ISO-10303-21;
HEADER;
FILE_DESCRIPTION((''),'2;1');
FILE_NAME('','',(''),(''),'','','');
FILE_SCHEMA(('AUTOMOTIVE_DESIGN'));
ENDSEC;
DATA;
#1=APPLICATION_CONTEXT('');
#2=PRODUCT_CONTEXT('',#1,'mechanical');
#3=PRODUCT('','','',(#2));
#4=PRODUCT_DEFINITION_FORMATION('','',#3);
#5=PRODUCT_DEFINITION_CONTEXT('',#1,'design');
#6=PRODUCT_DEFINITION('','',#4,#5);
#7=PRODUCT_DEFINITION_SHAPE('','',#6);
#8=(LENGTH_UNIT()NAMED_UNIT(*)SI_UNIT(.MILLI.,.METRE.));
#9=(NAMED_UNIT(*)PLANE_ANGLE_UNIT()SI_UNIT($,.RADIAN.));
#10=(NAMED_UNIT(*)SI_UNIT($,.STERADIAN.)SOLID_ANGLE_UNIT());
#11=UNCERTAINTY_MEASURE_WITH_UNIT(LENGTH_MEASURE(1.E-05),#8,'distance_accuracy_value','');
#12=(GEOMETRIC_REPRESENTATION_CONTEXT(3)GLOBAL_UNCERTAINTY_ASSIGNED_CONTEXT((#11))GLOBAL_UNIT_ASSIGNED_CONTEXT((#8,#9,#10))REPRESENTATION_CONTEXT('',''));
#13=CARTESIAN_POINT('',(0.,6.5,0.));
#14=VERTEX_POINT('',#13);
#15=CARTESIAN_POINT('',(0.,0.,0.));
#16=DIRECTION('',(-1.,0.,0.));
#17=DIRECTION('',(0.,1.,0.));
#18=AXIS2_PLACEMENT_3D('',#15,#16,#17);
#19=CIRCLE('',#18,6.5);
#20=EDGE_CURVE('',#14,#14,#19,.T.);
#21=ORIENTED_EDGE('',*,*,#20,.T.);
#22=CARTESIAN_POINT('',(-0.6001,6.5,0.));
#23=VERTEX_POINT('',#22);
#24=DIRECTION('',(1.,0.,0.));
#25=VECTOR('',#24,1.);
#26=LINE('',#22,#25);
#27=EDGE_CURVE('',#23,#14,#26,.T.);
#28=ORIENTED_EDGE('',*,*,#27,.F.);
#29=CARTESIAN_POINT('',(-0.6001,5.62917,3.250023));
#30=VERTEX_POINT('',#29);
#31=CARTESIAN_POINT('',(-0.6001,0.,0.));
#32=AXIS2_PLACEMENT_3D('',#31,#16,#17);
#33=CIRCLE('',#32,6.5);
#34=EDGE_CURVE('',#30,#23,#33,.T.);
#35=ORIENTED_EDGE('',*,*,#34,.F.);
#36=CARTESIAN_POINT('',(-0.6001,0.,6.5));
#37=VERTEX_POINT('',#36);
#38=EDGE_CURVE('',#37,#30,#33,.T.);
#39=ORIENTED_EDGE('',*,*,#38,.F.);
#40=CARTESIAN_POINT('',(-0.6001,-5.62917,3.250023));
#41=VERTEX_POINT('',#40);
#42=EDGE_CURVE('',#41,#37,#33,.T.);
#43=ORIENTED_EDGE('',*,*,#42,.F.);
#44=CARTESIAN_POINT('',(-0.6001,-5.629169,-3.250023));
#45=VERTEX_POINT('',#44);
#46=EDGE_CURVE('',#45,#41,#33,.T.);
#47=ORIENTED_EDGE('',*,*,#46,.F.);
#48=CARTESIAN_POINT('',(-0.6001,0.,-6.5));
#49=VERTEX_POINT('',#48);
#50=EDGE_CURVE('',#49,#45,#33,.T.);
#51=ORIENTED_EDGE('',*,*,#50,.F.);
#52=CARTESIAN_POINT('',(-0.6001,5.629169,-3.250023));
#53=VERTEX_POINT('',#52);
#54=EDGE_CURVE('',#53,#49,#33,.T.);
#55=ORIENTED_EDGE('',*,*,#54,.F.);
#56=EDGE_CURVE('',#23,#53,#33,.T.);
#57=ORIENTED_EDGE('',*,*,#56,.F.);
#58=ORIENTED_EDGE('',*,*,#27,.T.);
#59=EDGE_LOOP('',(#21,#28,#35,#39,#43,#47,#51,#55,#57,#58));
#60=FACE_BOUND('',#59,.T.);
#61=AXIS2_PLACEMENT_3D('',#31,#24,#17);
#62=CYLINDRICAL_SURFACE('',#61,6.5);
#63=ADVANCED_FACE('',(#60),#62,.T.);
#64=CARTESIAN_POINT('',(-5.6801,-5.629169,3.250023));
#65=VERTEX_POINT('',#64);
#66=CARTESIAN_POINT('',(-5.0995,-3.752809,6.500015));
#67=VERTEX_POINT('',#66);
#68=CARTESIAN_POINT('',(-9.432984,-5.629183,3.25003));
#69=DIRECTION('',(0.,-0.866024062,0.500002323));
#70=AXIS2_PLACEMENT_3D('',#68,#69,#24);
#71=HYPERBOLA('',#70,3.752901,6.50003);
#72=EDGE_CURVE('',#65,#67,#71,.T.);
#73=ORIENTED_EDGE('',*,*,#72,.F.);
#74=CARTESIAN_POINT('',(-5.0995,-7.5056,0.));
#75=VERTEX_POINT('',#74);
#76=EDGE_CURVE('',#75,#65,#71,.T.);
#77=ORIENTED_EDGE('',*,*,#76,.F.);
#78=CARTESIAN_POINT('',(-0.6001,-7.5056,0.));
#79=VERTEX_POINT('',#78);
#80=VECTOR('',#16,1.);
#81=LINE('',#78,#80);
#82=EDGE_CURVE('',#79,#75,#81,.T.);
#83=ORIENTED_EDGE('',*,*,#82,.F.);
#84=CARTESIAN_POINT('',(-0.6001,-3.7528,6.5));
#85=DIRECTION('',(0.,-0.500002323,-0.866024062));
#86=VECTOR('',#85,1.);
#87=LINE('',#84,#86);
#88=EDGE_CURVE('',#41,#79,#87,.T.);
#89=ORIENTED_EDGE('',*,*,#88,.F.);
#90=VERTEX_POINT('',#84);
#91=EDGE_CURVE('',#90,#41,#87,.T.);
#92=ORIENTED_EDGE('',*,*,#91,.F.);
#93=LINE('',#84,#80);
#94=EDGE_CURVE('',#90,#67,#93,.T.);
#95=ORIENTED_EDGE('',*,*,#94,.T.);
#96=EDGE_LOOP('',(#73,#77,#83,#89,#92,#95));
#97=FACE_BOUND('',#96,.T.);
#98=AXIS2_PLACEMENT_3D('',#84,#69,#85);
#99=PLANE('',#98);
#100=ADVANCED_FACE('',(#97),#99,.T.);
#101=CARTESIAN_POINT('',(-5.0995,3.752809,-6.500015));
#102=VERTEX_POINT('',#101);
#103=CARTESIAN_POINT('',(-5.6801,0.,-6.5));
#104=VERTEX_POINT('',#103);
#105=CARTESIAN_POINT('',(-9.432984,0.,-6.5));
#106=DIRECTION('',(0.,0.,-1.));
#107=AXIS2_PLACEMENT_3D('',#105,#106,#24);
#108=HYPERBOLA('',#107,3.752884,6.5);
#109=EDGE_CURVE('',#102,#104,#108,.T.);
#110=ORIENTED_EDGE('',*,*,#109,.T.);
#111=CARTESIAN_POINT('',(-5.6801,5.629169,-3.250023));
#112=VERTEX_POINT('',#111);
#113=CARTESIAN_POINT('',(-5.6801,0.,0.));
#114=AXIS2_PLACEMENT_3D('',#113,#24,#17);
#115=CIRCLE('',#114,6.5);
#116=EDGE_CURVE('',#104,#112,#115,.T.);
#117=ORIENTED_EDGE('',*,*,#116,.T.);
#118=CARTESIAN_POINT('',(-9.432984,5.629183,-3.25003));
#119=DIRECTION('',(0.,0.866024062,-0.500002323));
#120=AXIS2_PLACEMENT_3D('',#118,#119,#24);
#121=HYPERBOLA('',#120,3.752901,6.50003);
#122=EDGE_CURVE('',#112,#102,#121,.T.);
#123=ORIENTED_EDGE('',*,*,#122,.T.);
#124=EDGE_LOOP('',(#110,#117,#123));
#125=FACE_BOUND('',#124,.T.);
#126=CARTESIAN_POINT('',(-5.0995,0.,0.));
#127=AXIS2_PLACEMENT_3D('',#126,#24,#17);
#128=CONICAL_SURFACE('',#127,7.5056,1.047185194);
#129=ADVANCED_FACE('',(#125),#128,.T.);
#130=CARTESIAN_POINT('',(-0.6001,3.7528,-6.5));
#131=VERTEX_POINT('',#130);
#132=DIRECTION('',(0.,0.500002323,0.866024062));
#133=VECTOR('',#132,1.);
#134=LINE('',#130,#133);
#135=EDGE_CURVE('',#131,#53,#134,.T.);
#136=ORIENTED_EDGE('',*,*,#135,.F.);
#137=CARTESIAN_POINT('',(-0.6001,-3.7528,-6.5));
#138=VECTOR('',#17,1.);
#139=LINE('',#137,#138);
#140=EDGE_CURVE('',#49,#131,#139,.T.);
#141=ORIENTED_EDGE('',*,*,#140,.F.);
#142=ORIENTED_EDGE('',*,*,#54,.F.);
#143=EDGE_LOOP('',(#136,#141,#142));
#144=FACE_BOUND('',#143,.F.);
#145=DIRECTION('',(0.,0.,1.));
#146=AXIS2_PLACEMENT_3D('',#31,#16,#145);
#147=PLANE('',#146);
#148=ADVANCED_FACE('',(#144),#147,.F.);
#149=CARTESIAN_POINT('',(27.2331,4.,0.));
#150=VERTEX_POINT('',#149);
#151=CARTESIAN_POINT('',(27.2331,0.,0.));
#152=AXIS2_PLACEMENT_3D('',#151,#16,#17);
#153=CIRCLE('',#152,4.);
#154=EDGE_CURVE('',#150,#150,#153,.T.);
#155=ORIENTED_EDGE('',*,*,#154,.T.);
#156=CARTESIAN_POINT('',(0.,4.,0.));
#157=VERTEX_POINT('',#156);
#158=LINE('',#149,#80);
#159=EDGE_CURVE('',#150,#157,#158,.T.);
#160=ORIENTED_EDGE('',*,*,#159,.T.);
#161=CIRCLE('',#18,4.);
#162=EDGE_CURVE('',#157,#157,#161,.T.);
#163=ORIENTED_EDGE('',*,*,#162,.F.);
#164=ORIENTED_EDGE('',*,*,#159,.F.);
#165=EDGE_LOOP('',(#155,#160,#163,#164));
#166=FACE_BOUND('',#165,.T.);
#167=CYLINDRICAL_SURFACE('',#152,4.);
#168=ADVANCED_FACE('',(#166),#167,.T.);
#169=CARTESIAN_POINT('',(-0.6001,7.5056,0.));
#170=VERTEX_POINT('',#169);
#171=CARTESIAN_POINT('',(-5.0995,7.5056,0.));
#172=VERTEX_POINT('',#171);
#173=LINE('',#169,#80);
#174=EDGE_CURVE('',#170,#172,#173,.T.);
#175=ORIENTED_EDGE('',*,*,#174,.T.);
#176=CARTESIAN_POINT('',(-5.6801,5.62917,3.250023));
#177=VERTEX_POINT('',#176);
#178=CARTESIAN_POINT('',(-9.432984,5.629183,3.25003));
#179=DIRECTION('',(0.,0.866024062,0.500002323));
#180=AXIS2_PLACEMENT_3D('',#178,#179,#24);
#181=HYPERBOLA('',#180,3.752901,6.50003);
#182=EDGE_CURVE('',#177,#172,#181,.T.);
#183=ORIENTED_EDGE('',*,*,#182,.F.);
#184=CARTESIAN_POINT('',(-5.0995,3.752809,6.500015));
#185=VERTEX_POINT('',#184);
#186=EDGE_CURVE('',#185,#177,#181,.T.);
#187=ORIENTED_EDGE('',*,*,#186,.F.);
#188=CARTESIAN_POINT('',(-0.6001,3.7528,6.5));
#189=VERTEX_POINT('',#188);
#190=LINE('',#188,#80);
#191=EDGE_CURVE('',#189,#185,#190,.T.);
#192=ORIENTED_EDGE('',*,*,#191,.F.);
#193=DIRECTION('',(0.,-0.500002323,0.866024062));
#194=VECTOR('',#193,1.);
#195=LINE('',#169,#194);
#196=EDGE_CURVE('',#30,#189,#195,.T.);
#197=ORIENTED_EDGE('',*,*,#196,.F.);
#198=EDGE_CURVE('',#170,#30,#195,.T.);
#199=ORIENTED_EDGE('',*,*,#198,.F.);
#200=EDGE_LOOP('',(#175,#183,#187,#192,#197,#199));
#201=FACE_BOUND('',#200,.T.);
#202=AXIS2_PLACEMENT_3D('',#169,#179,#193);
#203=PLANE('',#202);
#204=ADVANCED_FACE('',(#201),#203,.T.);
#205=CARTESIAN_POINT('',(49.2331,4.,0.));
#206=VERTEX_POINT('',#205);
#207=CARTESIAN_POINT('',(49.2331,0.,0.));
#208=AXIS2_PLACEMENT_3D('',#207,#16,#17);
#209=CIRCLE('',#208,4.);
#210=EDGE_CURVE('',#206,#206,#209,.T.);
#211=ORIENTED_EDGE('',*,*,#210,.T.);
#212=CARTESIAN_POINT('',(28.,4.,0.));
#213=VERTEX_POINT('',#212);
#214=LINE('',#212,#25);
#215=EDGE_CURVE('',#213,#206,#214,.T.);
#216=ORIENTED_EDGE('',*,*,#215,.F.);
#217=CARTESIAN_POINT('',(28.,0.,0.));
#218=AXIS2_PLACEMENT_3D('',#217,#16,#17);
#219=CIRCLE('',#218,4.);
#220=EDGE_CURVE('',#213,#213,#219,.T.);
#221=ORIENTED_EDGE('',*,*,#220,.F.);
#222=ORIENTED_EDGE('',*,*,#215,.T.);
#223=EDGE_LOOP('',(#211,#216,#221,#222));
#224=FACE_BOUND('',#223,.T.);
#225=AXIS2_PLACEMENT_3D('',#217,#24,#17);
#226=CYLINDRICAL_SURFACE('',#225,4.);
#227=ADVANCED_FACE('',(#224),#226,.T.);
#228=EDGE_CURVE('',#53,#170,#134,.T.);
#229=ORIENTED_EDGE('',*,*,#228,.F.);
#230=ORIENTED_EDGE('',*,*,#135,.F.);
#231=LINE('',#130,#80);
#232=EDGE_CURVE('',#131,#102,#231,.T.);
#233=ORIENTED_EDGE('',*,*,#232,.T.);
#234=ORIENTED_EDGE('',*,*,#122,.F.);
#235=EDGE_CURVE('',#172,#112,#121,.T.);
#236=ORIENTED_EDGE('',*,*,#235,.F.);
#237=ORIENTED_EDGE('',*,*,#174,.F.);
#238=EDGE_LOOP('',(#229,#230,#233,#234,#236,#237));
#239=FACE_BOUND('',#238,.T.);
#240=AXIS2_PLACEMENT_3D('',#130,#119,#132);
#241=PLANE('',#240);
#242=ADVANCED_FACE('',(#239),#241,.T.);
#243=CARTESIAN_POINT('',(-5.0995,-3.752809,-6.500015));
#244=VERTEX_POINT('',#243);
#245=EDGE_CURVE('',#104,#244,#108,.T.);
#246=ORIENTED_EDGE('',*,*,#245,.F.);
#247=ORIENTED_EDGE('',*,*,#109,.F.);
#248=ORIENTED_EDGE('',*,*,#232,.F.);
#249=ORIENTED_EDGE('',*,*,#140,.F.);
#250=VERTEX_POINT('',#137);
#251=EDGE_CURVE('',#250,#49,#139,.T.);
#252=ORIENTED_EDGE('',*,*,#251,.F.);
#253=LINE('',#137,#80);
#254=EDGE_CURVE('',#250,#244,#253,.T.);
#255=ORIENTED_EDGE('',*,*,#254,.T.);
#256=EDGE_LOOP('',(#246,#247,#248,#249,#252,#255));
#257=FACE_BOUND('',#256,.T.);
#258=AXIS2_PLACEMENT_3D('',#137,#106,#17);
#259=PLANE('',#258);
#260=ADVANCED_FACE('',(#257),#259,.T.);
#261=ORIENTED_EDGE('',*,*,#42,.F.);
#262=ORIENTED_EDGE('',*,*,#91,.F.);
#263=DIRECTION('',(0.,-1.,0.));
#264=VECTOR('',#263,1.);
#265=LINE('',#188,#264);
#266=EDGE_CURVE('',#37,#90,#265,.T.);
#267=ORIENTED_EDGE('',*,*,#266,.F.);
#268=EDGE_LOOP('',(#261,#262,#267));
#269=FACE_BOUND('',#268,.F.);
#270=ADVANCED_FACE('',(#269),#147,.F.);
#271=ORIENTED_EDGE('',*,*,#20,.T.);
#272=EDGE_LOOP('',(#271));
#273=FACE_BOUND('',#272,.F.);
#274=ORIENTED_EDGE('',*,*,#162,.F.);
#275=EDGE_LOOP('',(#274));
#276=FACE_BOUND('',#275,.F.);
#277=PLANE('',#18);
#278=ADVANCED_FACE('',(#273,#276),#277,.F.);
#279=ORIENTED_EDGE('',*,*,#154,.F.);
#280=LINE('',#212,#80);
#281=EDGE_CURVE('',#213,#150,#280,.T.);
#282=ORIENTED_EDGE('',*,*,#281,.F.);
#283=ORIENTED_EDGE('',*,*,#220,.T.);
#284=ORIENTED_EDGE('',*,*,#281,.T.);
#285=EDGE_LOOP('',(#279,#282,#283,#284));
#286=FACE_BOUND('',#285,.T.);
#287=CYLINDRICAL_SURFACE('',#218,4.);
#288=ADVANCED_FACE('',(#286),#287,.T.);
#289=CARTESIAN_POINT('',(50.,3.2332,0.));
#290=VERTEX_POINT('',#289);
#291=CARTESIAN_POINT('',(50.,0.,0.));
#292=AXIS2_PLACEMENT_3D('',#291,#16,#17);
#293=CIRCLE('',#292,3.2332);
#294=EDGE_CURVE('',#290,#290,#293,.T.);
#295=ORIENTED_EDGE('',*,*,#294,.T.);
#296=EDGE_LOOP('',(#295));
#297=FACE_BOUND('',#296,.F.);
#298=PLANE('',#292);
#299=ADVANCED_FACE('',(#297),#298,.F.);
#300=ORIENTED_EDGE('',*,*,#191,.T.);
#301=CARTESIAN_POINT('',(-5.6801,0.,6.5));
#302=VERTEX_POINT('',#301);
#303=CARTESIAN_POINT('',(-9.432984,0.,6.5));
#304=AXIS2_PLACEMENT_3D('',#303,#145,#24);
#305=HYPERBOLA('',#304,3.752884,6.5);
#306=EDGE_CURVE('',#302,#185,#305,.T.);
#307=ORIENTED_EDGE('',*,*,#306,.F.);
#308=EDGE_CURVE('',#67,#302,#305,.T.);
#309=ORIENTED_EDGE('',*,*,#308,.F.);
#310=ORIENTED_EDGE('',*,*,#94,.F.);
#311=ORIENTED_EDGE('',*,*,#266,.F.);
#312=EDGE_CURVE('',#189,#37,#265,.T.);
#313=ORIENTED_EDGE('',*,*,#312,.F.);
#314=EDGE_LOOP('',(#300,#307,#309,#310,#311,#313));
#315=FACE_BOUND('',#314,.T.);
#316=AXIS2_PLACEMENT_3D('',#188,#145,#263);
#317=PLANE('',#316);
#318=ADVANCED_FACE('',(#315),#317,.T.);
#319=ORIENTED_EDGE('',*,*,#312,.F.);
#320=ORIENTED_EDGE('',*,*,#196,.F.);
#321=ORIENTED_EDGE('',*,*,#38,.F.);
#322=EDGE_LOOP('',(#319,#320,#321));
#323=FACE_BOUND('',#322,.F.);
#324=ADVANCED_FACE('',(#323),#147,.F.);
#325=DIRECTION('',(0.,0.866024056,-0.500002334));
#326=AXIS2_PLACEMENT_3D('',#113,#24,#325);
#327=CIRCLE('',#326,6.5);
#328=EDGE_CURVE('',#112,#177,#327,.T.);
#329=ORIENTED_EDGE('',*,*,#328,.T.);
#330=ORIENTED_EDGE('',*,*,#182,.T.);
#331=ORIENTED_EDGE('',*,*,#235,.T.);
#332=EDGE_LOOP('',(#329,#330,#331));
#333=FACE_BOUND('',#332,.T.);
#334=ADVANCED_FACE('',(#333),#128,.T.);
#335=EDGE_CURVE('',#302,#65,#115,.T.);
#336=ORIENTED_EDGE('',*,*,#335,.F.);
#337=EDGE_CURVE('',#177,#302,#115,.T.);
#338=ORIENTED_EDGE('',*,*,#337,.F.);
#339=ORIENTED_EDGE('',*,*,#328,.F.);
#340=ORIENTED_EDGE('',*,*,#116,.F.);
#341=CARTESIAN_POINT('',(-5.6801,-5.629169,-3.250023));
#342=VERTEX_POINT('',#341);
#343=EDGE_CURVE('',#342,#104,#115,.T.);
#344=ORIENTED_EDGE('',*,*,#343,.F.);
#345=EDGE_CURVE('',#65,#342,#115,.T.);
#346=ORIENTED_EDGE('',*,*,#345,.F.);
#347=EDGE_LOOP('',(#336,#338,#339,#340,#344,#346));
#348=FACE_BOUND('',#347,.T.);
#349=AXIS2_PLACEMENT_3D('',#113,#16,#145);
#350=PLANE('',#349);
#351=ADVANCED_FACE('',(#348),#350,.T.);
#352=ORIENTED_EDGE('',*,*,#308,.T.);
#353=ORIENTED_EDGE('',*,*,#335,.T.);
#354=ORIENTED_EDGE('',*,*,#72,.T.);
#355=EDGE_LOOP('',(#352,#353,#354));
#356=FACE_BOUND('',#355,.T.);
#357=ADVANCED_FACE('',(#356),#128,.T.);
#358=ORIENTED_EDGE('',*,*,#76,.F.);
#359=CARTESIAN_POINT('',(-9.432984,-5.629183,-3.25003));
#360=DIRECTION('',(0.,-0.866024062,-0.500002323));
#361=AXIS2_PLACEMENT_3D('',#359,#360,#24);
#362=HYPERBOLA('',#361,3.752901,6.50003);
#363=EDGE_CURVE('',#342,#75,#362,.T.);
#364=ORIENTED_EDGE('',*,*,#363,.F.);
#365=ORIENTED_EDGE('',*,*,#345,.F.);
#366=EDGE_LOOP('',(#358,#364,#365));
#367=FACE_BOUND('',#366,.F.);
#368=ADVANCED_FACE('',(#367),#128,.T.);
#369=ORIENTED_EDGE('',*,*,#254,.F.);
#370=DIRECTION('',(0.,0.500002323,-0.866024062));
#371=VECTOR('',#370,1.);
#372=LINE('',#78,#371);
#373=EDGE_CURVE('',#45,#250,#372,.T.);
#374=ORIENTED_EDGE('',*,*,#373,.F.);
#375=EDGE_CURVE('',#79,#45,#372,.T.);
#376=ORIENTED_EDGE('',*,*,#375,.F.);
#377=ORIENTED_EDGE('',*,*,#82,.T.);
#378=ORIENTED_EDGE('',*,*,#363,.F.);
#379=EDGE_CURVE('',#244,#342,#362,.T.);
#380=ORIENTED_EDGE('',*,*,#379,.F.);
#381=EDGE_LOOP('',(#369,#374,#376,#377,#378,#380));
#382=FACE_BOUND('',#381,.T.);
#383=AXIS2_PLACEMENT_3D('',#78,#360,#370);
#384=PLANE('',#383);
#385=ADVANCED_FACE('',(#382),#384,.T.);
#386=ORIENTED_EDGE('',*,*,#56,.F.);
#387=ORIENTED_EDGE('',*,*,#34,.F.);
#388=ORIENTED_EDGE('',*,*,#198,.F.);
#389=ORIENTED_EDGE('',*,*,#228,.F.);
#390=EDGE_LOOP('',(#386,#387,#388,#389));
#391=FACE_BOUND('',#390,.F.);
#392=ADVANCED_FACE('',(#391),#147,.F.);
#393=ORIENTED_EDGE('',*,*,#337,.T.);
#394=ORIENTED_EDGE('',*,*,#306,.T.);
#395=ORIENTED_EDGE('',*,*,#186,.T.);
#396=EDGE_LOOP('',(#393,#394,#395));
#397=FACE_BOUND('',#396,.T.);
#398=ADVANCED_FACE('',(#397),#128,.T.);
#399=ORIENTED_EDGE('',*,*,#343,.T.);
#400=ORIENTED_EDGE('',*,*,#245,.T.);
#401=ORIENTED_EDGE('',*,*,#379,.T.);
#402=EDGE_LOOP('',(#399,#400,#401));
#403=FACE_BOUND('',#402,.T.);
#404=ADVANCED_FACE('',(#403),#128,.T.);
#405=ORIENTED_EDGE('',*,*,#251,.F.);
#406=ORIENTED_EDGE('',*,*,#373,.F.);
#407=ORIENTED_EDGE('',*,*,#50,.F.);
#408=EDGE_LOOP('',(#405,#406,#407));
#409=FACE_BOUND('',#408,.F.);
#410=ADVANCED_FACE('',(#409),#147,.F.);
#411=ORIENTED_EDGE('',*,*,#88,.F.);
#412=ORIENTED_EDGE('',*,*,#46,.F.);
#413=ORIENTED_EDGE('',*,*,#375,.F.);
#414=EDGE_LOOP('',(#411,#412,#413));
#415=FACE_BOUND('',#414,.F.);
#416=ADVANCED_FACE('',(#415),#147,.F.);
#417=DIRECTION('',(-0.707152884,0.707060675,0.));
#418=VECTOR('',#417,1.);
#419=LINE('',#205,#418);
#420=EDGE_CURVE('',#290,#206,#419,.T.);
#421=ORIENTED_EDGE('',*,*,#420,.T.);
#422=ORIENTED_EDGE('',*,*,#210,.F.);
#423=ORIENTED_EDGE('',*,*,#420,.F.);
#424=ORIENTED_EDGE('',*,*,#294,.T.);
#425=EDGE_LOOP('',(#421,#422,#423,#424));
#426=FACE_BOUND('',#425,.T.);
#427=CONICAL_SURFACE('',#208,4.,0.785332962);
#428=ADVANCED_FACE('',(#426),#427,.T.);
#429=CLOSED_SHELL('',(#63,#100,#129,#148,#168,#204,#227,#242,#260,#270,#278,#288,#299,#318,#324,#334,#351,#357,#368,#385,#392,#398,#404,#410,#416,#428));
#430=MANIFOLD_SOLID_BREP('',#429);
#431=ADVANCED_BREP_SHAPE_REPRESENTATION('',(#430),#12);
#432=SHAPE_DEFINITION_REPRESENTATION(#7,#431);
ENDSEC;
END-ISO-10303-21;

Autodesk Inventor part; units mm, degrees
ref_plane "YZ Plane" through (0, 0, 0) normal (1, 0, 0) x (0, 1, 0)
ref_plane "XZ Plane" through (0, 0, 0) normal (0, 1, 0) x (-1, 0, 0)
sketch "Sketch1" plane through (0, 0, 0) normal (0, 0, 1) x (1, 0, 0)
  line L0 (0, 6.5) -> (0, 4)
  line L1 (28, 4) -> (50, 4)
  line L2 (50, 4) -> (50, 0)
  line L3 (50, 0) -> (-0.6001, 0)
  line L4 (-10.7201, 0) -> (60.12, 0) projected
  line L5 (-0.6001, 0) -> (-0.6001, 6.5)
  line L6 (-0.6001, 6.5) -> (0, 6.5)
  line L7 (28, 4) -> (27.2331, 4)
  line L8 (27.2331, 4) -> (0, 4)
  line L9 (0, -1.3) -> (0, 7.8) projected
  dimension "d0" = 50
  dimension "d1" = 22
  dimension "d2" = 8
  dimension "d9" = 0.6001
  dimension "d10" = 13
  dimension "d13" = 0.7669
  dimension "d14" = 8
revolve "Body" add sketch "Sketch1" angle 360 about axis through (50, 0, 0) along (-1, 0, 0)
sketch "Sketch2" plane through (-0.6001, 0, 0) normal (-1, 0, 0) x (0, 0, 1)
  line L0 (0, 7.5056) -> (6.5, 3.7528)
  line L1 (6.5, 3.7528) -> (6.5, -3.7528)
  line L2 (6.5, -3.7528) -> (0, -7.5056)
  line L3 (0, -7.5056) -> (-6.5, -3.7528)
  line L4 (-6.5, -3.7528) -> (-6.5, 3.7528)
  line L5 (-6.5, 3.7528) -> (0, 7.5056)
  point P0 (0, 0)
  point P1 (0, 0)
  dimension "d11" = 13
extrude "Head" add sketch "Sketch2" along normal blind 5.08
sketch "Sketch4" plane through (0, 0, 0) normal (0, 0, 1) x (1, 0, 0)
  line L0 (-5.6801, 6.5) -> (-5.6801, 7.5056)
  line L1 (-5.6801, 7.5056) -> (-5.0995, 7.5056)
  line L2 (-5.0995, 7.5056) -> (-5.6801, 6.5)
  line L3 (-6.6961, 0) -> (0.4159, 0) projected
  line L4 (-0.6001, 7.5056) -> (-5.6801, 7.5056) projected
  line L5 (-5.6801, 3.7528) -> (-5.6801, 7.5056) projected
  dimension "d5" = 30
  dimension "d19" = 13
revolve "Chamfer1" cut sketch "Sketch4" angle 360 about axis through (-10, 0, 0) along (1, 0, 0)
thread "Thread" size "M8x1.25" class "6g" standard "ISO Metric profile" length 22
chamfer "Chamfer2" distance 0.7668 distance2 0.7669 1 edges at (50, -4, 0) measured on face at (50, 1.2946, -0.3191)
ref_plane "Work Plane1" through (1.525, 0, 0) normal (0, 0, 1) x (1, 0, 0)
equation "\"d11\" = SW"
equation "\"d3\" = KOH - SD"
equation "\"d15\" = GEL"
equation "\"d6\" = -0.5 * SPD + 0.5 * GD"
equation "\"d0\" = NLG"
equation "\"d1\" = GEL"
equation "\"d2\" = GD"
equation "\"d10\" = SD2"
equation "\"d14\" = BDM"
equation "\"d5\" = ANG1"
equation "\"d19\" = SW0"
equation "\"NLG\" = 50"
equation "\"GD\" = NND"
equation "\"BDM\" = NND"
equation "\"KOH\" = 5.68"
equation "\"GEL\" = 22"
equation "\"SW\" = 13"
equation "\"SW0\" = SW"
equation "\"SPD\" = NND - 1.2269 * PTC"
equation "\"SD2\" = SW"
equation "\"SD\" = 0.6"
equation "\"ANG1\" = 30deg"
equation "\"GAL\" = 0.61345 * PTC"
equation "\"GUL\" = 0.61345 * PTC"
equation "\"RR\" = 0.4"
equation "\"WFT\" = SD"
equation "\"GD1\" = THREADDIA - 1.2269 * PTC"
equation "\"THREADDIA\" = 8"
equation "\"SDH\" = SW"
equation "\"TOA\" = 30deg"
equation "\"FAWI\" = 45deg"
equation "\"PTC\" = 1.25"
equation "\"NND\" = 8"
equation "\"E0\" = 1.155 * SW"
properties part number "AS 1111 - M8 x 50" material "Steel, Mild"
